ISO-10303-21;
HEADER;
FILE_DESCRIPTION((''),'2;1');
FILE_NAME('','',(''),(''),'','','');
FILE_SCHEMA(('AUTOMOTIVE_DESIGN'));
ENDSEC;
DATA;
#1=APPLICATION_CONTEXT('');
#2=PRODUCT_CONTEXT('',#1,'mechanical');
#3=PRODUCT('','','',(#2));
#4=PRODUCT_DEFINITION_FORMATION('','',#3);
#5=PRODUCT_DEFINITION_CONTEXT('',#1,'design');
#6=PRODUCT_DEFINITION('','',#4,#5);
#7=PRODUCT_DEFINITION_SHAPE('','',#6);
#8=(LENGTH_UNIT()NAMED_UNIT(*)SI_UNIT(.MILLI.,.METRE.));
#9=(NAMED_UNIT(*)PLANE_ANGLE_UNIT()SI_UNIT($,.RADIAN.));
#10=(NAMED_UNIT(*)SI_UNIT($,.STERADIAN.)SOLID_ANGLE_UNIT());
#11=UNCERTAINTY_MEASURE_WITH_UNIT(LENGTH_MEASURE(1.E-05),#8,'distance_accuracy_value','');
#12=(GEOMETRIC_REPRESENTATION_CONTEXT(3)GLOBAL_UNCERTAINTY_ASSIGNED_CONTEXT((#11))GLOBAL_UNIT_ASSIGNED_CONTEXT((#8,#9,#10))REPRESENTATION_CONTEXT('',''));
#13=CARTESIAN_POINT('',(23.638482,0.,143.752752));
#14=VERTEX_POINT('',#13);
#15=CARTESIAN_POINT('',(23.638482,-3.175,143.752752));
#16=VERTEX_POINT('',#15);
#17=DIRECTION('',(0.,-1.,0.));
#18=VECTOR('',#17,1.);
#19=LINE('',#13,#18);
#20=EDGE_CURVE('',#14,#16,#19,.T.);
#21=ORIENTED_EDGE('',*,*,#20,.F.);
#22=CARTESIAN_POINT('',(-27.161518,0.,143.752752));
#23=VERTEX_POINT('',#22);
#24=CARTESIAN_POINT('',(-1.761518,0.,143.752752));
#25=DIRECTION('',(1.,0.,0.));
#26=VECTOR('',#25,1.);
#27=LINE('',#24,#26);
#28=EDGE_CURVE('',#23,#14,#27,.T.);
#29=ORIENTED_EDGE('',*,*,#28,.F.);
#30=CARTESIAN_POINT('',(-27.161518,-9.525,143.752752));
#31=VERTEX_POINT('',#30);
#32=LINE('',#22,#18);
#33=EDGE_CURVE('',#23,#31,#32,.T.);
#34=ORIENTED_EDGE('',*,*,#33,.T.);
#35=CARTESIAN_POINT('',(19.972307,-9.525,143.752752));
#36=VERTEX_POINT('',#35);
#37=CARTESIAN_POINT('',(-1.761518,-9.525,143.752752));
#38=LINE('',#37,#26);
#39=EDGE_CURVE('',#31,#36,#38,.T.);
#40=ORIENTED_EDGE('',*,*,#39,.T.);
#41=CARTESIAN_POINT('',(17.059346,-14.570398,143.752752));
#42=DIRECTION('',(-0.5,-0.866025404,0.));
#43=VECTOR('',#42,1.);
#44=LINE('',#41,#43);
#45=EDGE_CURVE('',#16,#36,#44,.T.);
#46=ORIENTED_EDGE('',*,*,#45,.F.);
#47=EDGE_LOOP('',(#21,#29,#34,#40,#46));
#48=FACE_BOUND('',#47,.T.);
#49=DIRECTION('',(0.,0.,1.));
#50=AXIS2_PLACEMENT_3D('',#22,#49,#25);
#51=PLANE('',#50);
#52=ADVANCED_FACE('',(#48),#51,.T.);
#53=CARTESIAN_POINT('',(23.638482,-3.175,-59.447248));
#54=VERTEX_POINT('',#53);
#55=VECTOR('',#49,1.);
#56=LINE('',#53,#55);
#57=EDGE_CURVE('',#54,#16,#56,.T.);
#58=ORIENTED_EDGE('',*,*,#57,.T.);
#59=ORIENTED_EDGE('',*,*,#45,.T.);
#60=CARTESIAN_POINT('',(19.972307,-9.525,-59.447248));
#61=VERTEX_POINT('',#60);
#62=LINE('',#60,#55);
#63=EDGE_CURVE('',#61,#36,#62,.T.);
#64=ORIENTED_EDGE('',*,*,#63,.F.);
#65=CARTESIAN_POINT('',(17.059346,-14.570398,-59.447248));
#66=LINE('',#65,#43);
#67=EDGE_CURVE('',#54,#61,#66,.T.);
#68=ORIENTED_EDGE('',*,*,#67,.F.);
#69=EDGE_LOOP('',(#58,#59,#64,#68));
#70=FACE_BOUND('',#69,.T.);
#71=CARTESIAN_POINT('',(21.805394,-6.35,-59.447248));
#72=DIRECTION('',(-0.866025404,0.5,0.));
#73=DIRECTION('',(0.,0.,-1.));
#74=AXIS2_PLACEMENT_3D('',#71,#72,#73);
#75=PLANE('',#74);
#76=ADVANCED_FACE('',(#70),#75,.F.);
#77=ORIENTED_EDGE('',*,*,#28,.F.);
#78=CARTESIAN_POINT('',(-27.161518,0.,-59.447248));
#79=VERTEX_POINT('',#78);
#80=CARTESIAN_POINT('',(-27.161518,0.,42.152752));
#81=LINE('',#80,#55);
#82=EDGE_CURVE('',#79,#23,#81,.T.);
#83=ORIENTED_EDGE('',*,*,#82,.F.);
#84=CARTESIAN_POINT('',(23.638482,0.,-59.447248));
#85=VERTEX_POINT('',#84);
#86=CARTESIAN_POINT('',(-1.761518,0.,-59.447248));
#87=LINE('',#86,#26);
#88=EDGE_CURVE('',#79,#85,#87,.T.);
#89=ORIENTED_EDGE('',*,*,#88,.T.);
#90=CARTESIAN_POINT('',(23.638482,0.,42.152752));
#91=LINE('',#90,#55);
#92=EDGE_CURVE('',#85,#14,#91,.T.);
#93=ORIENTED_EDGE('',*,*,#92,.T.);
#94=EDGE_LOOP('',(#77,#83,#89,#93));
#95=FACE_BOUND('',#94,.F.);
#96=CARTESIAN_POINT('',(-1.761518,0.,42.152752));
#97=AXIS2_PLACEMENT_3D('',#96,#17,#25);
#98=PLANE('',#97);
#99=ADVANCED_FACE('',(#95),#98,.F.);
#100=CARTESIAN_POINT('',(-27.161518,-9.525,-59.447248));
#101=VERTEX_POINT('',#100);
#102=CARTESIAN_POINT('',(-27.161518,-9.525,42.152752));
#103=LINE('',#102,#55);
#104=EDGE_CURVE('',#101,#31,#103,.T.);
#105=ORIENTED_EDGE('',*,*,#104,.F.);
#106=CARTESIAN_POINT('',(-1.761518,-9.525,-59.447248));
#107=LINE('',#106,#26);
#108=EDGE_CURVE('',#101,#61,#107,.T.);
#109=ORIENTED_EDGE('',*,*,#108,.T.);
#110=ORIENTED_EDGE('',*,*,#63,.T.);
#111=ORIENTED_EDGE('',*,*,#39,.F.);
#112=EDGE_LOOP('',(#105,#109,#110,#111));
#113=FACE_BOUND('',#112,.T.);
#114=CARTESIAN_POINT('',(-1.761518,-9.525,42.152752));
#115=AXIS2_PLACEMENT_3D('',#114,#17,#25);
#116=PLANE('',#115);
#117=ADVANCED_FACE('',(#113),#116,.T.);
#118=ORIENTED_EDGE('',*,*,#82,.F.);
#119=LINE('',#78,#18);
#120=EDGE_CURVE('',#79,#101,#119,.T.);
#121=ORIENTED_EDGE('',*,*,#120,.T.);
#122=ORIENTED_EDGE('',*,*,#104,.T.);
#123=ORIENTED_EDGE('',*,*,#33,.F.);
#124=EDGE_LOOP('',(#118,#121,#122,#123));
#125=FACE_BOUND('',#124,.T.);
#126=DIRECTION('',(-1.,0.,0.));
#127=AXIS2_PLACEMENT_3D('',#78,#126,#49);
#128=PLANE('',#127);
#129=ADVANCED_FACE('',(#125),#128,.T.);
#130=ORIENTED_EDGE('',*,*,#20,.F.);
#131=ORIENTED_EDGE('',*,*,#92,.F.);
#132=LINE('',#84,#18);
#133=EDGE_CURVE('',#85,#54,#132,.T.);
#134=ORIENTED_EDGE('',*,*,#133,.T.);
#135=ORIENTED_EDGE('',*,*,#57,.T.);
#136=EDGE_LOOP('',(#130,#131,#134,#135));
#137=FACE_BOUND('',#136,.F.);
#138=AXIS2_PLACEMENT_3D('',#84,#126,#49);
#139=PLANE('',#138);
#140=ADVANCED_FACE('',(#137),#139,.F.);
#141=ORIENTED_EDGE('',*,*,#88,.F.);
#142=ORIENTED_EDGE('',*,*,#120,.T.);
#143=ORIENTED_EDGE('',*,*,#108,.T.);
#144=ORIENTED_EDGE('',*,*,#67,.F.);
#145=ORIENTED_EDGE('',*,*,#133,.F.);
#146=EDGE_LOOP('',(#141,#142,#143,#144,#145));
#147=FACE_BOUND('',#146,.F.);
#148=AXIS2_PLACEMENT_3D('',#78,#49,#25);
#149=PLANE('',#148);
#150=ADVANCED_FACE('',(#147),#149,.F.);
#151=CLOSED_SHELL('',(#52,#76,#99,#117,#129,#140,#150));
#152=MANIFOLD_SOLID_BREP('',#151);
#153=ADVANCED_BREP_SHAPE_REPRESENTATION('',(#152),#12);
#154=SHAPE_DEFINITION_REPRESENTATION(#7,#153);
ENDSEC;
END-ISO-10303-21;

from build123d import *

# Parameters (mm, degrees)
F0_W     = 50.8
F0_H     = 203.2
F1_DEPTH = 9.525
F2_SIZE2 = 3.6661742094
F2_SIZE  = 6.35


# Not quite as in the source:
# - a length typed as a fraction of an inch, garbled in the dataset ("3 / 203.2 mm" for 3/8 in), is restored


with BuildPart() as f1:
    # F0 (on Front) → F1 (new body)
    with BuildSketch(Plane.XZ):
        with Locations((-1.7615184188, 42.1527517154)):
            Rectangle(F0_W, F0_H)
    extrude(amount=F1_DEPTH)

    # F2
    f2_edges = [f1.edges().sort_by_distance(p)[0] for p in [
        (23.638482, -9.525, 42.152752),
    ]]
    f2_side = f1.faces().sort_by_distance((23.638482, -4.7625, 42.152752))[0]
    chamfer(f2_edges, length=F2_SIZE, length2=F2_SIZE2, reference=f2_side)


solid = f1.part
